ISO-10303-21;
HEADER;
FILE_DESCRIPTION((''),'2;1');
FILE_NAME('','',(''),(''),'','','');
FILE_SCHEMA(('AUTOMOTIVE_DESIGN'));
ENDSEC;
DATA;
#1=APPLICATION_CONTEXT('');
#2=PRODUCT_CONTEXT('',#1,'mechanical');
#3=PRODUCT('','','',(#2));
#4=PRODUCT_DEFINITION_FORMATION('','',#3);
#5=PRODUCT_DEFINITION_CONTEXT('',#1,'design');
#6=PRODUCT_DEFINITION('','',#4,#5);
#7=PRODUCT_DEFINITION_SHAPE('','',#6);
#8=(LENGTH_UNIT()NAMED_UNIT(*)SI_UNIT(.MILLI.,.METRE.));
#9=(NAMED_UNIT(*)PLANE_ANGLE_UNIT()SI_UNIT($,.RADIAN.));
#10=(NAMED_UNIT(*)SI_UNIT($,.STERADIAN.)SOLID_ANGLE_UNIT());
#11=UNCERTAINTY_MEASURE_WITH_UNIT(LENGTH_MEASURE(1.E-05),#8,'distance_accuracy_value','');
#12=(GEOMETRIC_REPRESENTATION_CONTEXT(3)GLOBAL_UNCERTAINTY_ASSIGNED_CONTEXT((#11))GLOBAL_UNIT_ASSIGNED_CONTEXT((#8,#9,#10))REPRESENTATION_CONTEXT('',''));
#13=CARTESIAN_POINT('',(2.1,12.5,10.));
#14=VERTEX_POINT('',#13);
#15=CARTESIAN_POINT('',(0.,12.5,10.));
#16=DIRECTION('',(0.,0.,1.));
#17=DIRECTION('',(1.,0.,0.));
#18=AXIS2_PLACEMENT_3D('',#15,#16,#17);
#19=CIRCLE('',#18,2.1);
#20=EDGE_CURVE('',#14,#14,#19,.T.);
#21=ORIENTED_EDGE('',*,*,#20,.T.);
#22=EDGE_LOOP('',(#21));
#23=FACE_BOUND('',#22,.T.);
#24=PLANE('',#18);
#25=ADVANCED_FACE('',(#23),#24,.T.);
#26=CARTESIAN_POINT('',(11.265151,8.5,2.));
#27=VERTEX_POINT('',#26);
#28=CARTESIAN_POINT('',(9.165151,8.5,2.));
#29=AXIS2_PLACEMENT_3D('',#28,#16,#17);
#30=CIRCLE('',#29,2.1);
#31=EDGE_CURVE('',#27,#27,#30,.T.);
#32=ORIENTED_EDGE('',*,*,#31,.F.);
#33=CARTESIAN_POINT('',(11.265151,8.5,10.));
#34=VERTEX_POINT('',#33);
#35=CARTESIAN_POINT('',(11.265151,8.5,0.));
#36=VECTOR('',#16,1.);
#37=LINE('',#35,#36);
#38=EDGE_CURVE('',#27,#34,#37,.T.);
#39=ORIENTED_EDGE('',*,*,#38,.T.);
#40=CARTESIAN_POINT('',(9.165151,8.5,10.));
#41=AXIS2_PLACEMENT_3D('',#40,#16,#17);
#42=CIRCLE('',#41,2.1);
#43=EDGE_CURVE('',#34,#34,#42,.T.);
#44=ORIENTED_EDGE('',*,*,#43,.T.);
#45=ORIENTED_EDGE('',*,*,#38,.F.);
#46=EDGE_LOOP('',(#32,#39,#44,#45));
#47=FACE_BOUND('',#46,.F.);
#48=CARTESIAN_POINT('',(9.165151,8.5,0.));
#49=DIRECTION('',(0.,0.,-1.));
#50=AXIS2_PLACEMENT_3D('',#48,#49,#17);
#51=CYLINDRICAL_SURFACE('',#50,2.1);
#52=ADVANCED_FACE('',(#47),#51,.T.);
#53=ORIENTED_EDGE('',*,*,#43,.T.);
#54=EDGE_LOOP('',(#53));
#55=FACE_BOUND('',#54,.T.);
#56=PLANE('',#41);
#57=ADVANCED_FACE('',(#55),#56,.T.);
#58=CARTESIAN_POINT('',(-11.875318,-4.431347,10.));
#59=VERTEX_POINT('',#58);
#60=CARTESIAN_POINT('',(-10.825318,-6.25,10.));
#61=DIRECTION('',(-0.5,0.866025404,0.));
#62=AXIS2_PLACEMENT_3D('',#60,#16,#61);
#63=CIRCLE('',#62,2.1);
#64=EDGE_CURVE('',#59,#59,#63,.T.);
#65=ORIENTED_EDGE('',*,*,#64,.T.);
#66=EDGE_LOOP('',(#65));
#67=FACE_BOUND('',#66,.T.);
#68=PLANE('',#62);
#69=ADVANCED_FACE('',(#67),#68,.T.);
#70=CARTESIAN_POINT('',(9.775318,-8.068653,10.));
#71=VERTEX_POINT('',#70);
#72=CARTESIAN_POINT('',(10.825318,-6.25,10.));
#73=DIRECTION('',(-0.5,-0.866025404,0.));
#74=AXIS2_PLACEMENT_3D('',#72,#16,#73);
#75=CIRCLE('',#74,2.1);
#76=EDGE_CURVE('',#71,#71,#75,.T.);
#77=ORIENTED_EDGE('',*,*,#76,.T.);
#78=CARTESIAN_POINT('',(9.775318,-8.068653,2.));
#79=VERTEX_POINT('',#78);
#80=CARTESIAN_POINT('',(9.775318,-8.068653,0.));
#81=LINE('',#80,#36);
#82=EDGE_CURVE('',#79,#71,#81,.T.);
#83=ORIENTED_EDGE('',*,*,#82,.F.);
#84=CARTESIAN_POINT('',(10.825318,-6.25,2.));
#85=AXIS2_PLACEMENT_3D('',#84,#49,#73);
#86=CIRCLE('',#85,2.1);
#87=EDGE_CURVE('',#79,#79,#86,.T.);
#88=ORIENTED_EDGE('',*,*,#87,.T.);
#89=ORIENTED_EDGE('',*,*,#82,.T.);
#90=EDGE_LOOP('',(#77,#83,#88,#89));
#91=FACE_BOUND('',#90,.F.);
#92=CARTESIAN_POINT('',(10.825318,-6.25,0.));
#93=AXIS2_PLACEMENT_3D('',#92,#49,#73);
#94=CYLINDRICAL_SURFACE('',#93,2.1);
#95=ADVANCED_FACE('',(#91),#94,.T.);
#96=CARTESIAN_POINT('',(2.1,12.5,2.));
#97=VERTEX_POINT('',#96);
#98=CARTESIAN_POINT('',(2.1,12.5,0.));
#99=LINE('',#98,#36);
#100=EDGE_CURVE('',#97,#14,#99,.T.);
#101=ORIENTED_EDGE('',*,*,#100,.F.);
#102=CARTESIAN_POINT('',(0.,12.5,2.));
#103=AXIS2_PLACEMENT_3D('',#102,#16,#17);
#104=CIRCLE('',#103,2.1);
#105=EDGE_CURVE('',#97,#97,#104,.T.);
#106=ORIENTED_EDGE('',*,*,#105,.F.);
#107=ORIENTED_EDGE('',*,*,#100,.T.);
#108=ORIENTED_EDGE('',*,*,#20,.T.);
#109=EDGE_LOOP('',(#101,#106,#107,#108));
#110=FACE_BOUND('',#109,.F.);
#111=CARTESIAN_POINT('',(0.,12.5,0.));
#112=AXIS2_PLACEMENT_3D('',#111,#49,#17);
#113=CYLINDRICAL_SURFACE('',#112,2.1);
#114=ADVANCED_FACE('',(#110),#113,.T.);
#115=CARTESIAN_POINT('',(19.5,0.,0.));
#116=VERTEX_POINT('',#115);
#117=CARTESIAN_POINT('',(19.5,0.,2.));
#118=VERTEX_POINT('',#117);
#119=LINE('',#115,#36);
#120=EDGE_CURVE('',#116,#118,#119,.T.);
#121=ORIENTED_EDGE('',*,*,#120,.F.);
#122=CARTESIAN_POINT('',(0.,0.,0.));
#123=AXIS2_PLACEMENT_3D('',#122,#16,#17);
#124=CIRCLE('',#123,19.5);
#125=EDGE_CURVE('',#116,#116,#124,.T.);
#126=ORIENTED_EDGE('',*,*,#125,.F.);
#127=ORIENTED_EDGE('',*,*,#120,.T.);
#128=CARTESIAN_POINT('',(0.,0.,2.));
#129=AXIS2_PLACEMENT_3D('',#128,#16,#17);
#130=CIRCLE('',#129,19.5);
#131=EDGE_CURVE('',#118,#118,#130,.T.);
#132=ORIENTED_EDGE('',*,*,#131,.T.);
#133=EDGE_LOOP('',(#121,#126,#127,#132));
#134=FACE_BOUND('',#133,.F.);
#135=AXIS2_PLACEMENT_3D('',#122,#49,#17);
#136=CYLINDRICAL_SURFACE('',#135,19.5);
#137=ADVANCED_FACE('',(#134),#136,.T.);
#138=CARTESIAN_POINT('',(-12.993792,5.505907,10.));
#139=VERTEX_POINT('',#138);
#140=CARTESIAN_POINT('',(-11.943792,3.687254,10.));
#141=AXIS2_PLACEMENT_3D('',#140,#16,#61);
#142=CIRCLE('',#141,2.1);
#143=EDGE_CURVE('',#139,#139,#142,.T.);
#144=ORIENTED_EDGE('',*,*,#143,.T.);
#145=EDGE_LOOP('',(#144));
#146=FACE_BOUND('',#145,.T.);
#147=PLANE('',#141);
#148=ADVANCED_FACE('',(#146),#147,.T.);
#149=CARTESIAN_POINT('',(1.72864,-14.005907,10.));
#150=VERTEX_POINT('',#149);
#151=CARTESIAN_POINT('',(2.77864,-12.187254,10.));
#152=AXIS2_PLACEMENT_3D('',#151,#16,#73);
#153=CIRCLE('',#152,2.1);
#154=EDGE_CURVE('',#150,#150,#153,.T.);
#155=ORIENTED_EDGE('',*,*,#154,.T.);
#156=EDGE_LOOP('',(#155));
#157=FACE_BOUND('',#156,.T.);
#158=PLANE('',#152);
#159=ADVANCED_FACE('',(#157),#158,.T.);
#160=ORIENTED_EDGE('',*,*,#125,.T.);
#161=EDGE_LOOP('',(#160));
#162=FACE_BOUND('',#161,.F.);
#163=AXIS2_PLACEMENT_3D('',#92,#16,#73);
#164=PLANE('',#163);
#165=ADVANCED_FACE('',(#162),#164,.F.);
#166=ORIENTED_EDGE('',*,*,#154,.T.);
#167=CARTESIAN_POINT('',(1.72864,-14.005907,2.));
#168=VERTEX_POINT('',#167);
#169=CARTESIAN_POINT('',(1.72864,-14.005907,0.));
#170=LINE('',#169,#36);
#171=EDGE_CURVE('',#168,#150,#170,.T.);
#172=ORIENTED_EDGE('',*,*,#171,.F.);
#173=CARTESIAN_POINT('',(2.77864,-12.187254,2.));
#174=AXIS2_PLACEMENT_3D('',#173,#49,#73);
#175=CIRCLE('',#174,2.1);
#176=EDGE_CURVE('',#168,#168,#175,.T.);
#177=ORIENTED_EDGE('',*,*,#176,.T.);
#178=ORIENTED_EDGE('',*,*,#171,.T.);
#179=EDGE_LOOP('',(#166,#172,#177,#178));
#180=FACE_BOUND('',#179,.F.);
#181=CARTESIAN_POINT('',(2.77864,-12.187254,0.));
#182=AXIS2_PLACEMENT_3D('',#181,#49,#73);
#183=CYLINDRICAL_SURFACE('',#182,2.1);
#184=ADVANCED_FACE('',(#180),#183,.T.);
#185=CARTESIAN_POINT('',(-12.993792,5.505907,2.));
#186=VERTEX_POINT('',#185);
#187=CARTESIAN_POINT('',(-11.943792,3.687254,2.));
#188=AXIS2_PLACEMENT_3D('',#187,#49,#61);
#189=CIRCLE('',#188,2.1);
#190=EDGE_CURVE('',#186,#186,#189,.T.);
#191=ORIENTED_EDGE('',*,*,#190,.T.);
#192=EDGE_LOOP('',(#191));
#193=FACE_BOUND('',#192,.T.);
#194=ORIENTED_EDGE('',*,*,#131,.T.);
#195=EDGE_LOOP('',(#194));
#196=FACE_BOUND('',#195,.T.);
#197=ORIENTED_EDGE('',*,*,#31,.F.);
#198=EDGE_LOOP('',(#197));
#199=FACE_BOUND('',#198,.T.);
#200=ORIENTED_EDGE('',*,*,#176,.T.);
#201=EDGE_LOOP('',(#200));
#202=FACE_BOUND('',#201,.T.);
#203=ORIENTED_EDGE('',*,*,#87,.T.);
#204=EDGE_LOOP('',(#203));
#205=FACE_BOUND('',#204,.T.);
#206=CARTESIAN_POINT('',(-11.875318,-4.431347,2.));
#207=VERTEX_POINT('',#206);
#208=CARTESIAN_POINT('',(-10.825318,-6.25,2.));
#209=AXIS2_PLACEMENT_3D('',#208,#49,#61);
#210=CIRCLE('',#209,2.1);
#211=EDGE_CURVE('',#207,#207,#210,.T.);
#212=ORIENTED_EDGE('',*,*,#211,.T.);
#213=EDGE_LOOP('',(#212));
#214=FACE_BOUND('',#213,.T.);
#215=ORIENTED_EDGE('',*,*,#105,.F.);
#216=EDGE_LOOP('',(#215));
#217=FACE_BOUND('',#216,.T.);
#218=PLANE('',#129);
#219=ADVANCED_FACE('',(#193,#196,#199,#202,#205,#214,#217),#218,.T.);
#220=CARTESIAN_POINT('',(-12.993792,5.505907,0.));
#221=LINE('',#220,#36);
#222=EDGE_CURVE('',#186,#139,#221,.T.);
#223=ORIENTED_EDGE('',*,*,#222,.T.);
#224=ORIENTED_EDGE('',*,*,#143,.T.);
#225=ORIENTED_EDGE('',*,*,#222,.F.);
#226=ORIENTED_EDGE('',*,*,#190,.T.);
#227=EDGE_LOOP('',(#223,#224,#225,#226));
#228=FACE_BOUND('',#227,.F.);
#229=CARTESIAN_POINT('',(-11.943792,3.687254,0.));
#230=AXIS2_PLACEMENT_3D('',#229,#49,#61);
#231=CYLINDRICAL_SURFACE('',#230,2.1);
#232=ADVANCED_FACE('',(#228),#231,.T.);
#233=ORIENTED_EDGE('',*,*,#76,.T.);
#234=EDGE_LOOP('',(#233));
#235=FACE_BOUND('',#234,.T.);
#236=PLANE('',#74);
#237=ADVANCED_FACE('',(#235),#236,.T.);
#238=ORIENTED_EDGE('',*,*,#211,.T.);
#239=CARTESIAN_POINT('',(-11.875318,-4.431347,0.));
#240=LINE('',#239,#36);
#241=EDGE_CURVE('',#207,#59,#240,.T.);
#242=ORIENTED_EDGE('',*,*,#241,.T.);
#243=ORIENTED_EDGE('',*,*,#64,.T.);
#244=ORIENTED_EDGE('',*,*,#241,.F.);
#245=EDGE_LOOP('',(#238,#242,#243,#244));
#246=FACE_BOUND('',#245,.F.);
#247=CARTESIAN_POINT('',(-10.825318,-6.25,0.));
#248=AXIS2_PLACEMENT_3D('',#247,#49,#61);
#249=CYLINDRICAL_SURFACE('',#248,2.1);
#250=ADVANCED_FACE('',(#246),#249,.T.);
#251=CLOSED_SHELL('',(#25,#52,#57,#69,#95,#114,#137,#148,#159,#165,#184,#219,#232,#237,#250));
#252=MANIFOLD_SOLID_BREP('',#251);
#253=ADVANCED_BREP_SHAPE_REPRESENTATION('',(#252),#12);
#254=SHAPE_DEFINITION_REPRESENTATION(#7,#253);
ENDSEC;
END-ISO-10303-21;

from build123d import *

# Parameters (mm, degrees)
F0_R            = 19.5
F0_R_2          = 2.1
F1_DEPTH        = 2
F2_DEPTH        = 10
F2_COPIES_COUNT = 3


# Not quite as in the source:
# - a pattern or mirror of a feature is missing from the dataset's text; its kind, count and spacing are read off the source's solid


with BuildPart() as f1:
    # F0 (on Top) → F1 (new body)
    with BuildSketch(Plane.XY):
        Circle(F0_R)
        with Locations((9.1651513899, 8.5)):
            Circle(F0_R_2, mode=Mode.SUBTRACT)
        with Locations((0, 12.5)):
            Circle(F0_R_2, mode=Mode.SUBTRACT)
    extrude(amount=F1_DEPTH)

    # F0 (on Top) → F2 (join)
    with BuildSketch(Plane.XY):
        with Locations((0, 12.5)):
            Circle(F0_R_2)
        with Locations((9.1651513899, 8.5)):
            Circle(F0_R_2)
    f2 = extrude(amount=F2_DEPTH)

    # F2_copies: F2 ×3 about axis
    f2_copies_axis = Axis((0, 0, 0), (0, 0, 1))
    for i in range(1, F2_COPIES_COUNT):
        add(f2.rotate(f2_copies_axis, i * 360 / F2_COPIES_COUNT))


solid = f1.part
